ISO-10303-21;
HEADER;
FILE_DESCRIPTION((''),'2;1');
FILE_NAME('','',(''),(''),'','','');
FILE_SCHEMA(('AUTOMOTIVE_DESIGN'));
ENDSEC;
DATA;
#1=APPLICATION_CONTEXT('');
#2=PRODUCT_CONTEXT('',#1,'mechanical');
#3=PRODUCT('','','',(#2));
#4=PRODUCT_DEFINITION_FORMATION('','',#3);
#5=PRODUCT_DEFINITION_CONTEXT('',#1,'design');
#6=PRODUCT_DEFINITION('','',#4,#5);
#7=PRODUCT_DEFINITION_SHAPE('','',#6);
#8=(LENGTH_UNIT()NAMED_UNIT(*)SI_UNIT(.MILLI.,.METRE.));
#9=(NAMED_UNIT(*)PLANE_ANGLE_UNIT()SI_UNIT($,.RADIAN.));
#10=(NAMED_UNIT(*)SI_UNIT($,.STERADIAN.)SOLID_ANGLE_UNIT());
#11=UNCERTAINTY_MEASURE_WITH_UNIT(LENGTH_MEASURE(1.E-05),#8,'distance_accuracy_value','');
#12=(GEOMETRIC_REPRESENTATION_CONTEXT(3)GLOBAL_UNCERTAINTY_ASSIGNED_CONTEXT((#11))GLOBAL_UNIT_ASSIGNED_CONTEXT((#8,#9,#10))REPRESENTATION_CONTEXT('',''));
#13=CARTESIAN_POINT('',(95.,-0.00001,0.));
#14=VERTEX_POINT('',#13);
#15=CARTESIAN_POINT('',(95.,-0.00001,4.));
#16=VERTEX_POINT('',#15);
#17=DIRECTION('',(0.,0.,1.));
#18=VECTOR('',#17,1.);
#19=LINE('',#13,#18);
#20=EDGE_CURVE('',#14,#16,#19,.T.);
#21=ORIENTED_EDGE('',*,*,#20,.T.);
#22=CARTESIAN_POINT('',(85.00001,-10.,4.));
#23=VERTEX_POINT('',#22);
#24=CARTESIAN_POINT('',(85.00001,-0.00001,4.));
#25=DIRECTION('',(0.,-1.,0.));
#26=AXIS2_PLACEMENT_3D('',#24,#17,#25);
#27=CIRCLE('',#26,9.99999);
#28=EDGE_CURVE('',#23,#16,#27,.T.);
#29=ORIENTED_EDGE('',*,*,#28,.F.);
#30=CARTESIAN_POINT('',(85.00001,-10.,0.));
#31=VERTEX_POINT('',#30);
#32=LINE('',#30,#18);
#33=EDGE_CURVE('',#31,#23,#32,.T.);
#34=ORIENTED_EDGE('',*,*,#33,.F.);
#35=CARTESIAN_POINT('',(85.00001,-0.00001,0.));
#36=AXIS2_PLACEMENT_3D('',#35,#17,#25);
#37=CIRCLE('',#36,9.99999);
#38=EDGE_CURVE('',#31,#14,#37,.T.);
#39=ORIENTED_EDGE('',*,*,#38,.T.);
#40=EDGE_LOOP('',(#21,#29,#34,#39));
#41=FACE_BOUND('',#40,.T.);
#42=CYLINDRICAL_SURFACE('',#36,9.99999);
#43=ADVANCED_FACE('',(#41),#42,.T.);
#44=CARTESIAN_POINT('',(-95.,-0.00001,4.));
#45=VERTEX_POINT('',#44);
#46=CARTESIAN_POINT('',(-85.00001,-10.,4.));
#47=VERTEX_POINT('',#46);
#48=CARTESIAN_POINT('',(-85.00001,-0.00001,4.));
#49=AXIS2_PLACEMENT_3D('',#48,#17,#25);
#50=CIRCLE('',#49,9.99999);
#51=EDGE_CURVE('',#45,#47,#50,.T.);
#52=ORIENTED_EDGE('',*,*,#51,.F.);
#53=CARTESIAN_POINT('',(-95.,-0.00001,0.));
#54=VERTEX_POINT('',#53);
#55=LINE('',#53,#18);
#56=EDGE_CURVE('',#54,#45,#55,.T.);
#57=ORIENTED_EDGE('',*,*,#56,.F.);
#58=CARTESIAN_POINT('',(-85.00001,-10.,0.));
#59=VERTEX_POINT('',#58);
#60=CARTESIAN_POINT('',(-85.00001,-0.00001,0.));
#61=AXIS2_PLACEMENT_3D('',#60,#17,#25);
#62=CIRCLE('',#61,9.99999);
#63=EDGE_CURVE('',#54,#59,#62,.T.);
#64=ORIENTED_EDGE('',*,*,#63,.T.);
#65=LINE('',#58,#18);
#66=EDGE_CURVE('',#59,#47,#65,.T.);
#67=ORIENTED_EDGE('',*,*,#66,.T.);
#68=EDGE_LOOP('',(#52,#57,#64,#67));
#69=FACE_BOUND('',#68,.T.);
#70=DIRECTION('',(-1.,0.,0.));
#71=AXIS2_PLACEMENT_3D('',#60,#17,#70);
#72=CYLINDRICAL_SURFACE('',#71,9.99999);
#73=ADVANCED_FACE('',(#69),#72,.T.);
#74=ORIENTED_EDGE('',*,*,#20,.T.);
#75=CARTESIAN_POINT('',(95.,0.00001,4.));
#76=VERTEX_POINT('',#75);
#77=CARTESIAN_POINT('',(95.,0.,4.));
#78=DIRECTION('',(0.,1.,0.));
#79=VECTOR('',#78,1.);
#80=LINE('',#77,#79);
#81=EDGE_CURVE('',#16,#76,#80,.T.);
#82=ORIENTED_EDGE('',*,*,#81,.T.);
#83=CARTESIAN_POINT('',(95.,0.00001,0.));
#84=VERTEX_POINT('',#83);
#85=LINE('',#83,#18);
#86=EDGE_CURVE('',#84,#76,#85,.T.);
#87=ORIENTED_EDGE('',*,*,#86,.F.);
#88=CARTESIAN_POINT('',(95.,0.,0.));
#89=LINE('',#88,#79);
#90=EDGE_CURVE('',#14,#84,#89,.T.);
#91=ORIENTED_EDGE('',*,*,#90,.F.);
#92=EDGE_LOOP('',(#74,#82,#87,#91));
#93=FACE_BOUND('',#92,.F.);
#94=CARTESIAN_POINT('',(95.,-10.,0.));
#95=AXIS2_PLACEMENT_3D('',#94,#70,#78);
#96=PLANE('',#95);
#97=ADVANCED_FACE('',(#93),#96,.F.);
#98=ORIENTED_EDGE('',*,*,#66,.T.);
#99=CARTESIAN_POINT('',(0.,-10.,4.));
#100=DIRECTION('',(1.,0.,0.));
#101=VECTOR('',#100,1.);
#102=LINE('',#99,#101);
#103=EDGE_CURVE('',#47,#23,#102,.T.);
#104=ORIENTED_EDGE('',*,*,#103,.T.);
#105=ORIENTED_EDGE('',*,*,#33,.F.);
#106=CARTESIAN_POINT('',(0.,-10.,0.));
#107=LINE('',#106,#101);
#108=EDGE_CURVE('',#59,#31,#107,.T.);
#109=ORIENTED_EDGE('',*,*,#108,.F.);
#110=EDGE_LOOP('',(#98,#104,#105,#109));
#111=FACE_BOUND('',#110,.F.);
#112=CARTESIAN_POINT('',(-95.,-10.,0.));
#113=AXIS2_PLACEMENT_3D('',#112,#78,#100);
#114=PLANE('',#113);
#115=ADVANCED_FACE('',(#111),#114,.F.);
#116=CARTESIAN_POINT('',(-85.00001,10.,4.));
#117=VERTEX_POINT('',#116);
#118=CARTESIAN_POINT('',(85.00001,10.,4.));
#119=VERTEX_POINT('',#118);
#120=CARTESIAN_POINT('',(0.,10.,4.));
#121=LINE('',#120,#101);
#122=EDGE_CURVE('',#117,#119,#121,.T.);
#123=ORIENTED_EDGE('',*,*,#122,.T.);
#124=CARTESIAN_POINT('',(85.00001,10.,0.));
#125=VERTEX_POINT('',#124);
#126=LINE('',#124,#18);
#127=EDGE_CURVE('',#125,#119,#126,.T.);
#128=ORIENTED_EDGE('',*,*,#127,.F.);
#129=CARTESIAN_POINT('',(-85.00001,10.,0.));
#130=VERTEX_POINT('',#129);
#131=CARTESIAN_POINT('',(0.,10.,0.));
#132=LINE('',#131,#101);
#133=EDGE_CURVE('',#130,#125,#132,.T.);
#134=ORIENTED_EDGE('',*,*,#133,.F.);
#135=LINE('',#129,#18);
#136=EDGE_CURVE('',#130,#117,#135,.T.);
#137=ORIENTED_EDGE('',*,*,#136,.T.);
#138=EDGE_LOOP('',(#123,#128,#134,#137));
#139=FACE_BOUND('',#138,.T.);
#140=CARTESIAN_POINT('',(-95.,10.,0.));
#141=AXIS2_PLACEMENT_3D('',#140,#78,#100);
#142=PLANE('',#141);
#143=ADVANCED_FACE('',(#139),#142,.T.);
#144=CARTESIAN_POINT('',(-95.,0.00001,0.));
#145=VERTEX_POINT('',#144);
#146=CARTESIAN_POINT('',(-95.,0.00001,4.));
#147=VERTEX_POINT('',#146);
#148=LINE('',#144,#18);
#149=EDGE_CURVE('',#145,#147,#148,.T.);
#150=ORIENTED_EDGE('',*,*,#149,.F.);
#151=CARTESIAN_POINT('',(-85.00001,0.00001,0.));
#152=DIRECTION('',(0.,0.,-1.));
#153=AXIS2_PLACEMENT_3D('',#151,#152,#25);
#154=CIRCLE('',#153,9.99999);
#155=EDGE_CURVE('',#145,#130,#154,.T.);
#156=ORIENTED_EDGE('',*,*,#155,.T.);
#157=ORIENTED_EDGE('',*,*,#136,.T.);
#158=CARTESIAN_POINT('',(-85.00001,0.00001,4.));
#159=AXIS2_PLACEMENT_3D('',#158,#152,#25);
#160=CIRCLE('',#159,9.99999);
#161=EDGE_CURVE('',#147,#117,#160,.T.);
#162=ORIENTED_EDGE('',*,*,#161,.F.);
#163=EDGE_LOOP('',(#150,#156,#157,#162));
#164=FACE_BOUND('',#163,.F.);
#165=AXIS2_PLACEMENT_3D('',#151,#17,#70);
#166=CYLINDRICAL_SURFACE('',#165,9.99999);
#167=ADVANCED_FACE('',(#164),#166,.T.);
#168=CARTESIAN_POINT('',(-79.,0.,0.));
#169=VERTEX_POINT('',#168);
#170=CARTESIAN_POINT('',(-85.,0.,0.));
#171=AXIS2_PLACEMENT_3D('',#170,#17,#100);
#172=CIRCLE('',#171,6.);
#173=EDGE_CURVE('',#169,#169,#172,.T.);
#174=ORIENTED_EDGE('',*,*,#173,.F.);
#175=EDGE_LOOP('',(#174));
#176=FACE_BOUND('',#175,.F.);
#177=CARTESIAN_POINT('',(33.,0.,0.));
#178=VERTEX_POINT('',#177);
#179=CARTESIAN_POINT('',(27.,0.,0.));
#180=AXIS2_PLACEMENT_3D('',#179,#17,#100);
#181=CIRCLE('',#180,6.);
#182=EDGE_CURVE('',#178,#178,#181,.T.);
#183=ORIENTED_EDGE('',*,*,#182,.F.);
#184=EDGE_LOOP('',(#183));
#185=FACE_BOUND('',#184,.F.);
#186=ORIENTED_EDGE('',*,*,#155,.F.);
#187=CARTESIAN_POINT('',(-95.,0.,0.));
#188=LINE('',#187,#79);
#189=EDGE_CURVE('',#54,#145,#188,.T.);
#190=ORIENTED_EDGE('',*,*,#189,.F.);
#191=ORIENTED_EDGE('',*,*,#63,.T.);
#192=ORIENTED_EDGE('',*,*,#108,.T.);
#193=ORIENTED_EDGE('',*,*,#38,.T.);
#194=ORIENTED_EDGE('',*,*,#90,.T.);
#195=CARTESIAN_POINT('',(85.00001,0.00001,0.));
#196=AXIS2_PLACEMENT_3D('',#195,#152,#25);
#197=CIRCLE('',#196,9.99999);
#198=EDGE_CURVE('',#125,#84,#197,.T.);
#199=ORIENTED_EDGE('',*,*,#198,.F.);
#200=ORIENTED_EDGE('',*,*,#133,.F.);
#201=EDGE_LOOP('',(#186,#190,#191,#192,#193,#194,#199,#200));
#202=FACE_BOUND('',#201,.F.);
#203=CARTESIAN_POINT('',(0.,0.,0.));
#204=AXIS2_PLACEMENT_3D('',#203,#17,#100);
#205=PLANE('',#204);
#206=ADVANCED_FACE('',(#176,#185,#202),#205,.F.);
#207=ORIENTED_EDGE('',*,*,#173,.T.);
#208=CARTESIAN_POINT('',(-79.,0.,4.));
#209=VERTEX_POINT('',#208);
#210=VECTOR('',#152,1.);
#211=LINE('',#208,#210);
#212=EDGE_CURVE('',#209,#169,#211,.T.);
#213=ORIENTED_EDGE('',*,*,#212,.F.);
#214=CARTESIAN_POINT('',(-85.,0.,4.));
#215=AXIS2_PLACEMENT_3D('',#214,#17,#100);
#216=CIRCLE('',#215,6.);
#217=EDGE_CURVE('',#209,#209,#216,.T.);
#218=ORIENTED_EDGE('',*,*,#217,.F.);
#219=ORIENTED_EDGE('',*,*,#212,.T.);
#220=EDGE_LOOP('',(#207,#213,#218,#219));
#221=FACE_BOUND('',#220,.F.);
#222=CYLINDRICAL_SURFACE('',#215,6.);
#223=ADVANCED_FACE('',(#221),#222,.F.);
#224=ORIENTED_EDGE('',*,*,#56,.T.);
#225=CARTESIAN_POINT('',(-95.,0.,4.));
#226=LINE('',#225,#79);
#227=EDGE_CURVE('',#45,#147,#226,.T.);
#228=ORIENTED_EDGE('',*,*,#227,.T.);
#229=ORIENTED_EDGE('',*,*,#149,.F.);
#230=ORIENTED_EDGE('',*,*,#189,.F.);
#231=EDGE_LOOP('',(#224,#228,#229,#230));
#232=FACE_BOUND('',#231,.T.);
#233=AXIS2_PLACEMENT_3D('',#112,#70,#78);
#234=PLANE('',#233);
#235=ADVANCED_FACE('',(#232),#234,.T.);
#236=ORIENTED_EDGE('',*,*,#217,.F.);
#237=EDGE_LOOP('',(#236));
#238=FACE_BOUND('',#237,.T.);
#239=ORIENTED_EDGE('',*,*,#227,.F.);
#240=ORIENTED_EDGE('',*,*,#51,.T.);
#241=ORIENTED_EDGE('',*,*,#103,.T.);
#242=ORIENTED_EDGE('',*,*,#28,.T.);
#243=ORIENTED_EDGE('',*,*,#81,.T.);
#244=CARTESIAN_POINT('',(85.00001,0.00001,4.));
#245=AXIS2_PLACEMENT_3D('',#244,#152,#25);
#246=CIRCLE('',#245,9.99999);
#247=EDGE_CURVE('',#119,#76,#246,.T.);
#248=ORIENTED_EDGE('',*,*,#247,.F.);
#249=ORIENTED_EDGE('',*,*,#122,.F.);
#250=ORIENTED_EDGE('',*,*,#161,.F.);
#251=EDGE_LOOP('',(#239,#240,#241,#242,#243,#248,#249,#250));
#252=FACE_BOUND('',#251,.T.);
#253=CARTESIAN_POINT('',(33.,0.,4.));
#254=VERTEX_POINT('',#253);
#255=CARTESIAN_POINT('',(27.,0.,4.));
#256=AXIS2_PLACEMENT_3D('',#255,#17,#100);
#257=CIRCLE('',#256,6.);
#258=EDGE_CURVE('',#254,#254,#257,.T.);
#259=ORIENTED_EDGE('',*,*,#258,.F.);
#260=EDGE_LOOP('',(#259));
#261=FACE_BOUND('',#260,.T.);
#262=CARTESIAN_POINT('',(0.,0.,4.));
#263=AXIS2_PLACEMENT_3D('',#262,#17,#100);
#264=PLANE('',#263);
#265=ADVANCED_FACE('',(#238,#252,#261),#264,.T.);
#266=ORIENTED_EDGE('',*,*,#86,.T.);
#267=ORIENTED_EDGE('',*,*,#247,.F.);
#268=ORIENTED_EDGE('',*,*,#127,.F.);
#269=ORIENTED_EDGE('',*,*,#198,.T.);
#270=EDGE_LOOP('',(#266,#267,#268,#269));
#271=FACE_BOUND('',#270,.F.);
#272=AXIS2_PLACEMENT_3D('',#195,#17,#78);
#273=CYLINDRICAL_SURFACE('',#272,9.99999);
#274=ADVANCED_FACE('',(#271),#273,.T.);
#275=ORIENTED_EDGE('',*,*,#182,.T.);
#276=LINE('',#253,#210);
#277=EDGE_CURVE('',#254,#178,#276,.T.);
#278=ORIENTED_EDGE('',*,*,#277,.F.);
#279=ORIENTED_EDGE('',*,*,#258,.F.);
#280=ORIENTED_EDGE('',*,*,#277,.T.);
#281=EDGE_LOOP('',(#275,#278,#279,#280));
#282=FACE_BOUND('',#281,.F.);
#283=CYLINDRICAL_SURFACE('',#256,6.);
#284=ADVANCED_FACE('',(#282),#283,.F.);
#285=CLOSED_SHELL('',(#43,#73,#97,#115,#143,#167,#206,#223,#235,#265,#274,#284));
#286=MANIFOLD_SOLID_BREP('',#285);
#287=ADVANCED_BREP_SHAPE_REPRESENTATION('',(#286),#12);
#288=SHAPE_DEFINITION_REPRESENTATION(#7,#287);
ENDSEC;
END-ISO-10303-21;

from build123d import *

# Parameters (mm, degrees)
F0_W     = 190
F0_H     = 20
F1_DEPTH = 4
F2_R     = 6
F3_DEPTH = 4.001
F4_R     = 9.99999


# Not quite as in the source:
# - a fillet or chamfer is up to 0.001 mm smaller than in the source, because OpenCascade refuses the exact size


with BuildPart() as f1:
    # F0 (on Top) → F1 (new body)
    with BuildSketch(Plane.XY):
        Rectangle(F0_W, F0_H)
    extrude(amount=F1_DEPTH)

    # F2 (on face) → F3 (cut, through all)
    with BuildSketch(Plane.XY.offset(4)):
        with Locations((-85, 0)):
            Circle(F2_R)
        with Locations((27, 0)):
            Circle(F2_R)
    extrude(amount=-F3_DEPTH, mode=Mode.SUBTRACT)

    # F4 (radius 10 in the source; OpenCascade refuses exactly that, so slightly less here)
    f4_edges = [f1.edges().sort_by_distance(p)[0] for p in [
        (-95, -10, 2),
        (-95, 10, 2),
        (95, 10, 2),
        (95, -10, 2),
    ]]
    fillet(f4_edges, radius=F4_R)


solid = f1.part
